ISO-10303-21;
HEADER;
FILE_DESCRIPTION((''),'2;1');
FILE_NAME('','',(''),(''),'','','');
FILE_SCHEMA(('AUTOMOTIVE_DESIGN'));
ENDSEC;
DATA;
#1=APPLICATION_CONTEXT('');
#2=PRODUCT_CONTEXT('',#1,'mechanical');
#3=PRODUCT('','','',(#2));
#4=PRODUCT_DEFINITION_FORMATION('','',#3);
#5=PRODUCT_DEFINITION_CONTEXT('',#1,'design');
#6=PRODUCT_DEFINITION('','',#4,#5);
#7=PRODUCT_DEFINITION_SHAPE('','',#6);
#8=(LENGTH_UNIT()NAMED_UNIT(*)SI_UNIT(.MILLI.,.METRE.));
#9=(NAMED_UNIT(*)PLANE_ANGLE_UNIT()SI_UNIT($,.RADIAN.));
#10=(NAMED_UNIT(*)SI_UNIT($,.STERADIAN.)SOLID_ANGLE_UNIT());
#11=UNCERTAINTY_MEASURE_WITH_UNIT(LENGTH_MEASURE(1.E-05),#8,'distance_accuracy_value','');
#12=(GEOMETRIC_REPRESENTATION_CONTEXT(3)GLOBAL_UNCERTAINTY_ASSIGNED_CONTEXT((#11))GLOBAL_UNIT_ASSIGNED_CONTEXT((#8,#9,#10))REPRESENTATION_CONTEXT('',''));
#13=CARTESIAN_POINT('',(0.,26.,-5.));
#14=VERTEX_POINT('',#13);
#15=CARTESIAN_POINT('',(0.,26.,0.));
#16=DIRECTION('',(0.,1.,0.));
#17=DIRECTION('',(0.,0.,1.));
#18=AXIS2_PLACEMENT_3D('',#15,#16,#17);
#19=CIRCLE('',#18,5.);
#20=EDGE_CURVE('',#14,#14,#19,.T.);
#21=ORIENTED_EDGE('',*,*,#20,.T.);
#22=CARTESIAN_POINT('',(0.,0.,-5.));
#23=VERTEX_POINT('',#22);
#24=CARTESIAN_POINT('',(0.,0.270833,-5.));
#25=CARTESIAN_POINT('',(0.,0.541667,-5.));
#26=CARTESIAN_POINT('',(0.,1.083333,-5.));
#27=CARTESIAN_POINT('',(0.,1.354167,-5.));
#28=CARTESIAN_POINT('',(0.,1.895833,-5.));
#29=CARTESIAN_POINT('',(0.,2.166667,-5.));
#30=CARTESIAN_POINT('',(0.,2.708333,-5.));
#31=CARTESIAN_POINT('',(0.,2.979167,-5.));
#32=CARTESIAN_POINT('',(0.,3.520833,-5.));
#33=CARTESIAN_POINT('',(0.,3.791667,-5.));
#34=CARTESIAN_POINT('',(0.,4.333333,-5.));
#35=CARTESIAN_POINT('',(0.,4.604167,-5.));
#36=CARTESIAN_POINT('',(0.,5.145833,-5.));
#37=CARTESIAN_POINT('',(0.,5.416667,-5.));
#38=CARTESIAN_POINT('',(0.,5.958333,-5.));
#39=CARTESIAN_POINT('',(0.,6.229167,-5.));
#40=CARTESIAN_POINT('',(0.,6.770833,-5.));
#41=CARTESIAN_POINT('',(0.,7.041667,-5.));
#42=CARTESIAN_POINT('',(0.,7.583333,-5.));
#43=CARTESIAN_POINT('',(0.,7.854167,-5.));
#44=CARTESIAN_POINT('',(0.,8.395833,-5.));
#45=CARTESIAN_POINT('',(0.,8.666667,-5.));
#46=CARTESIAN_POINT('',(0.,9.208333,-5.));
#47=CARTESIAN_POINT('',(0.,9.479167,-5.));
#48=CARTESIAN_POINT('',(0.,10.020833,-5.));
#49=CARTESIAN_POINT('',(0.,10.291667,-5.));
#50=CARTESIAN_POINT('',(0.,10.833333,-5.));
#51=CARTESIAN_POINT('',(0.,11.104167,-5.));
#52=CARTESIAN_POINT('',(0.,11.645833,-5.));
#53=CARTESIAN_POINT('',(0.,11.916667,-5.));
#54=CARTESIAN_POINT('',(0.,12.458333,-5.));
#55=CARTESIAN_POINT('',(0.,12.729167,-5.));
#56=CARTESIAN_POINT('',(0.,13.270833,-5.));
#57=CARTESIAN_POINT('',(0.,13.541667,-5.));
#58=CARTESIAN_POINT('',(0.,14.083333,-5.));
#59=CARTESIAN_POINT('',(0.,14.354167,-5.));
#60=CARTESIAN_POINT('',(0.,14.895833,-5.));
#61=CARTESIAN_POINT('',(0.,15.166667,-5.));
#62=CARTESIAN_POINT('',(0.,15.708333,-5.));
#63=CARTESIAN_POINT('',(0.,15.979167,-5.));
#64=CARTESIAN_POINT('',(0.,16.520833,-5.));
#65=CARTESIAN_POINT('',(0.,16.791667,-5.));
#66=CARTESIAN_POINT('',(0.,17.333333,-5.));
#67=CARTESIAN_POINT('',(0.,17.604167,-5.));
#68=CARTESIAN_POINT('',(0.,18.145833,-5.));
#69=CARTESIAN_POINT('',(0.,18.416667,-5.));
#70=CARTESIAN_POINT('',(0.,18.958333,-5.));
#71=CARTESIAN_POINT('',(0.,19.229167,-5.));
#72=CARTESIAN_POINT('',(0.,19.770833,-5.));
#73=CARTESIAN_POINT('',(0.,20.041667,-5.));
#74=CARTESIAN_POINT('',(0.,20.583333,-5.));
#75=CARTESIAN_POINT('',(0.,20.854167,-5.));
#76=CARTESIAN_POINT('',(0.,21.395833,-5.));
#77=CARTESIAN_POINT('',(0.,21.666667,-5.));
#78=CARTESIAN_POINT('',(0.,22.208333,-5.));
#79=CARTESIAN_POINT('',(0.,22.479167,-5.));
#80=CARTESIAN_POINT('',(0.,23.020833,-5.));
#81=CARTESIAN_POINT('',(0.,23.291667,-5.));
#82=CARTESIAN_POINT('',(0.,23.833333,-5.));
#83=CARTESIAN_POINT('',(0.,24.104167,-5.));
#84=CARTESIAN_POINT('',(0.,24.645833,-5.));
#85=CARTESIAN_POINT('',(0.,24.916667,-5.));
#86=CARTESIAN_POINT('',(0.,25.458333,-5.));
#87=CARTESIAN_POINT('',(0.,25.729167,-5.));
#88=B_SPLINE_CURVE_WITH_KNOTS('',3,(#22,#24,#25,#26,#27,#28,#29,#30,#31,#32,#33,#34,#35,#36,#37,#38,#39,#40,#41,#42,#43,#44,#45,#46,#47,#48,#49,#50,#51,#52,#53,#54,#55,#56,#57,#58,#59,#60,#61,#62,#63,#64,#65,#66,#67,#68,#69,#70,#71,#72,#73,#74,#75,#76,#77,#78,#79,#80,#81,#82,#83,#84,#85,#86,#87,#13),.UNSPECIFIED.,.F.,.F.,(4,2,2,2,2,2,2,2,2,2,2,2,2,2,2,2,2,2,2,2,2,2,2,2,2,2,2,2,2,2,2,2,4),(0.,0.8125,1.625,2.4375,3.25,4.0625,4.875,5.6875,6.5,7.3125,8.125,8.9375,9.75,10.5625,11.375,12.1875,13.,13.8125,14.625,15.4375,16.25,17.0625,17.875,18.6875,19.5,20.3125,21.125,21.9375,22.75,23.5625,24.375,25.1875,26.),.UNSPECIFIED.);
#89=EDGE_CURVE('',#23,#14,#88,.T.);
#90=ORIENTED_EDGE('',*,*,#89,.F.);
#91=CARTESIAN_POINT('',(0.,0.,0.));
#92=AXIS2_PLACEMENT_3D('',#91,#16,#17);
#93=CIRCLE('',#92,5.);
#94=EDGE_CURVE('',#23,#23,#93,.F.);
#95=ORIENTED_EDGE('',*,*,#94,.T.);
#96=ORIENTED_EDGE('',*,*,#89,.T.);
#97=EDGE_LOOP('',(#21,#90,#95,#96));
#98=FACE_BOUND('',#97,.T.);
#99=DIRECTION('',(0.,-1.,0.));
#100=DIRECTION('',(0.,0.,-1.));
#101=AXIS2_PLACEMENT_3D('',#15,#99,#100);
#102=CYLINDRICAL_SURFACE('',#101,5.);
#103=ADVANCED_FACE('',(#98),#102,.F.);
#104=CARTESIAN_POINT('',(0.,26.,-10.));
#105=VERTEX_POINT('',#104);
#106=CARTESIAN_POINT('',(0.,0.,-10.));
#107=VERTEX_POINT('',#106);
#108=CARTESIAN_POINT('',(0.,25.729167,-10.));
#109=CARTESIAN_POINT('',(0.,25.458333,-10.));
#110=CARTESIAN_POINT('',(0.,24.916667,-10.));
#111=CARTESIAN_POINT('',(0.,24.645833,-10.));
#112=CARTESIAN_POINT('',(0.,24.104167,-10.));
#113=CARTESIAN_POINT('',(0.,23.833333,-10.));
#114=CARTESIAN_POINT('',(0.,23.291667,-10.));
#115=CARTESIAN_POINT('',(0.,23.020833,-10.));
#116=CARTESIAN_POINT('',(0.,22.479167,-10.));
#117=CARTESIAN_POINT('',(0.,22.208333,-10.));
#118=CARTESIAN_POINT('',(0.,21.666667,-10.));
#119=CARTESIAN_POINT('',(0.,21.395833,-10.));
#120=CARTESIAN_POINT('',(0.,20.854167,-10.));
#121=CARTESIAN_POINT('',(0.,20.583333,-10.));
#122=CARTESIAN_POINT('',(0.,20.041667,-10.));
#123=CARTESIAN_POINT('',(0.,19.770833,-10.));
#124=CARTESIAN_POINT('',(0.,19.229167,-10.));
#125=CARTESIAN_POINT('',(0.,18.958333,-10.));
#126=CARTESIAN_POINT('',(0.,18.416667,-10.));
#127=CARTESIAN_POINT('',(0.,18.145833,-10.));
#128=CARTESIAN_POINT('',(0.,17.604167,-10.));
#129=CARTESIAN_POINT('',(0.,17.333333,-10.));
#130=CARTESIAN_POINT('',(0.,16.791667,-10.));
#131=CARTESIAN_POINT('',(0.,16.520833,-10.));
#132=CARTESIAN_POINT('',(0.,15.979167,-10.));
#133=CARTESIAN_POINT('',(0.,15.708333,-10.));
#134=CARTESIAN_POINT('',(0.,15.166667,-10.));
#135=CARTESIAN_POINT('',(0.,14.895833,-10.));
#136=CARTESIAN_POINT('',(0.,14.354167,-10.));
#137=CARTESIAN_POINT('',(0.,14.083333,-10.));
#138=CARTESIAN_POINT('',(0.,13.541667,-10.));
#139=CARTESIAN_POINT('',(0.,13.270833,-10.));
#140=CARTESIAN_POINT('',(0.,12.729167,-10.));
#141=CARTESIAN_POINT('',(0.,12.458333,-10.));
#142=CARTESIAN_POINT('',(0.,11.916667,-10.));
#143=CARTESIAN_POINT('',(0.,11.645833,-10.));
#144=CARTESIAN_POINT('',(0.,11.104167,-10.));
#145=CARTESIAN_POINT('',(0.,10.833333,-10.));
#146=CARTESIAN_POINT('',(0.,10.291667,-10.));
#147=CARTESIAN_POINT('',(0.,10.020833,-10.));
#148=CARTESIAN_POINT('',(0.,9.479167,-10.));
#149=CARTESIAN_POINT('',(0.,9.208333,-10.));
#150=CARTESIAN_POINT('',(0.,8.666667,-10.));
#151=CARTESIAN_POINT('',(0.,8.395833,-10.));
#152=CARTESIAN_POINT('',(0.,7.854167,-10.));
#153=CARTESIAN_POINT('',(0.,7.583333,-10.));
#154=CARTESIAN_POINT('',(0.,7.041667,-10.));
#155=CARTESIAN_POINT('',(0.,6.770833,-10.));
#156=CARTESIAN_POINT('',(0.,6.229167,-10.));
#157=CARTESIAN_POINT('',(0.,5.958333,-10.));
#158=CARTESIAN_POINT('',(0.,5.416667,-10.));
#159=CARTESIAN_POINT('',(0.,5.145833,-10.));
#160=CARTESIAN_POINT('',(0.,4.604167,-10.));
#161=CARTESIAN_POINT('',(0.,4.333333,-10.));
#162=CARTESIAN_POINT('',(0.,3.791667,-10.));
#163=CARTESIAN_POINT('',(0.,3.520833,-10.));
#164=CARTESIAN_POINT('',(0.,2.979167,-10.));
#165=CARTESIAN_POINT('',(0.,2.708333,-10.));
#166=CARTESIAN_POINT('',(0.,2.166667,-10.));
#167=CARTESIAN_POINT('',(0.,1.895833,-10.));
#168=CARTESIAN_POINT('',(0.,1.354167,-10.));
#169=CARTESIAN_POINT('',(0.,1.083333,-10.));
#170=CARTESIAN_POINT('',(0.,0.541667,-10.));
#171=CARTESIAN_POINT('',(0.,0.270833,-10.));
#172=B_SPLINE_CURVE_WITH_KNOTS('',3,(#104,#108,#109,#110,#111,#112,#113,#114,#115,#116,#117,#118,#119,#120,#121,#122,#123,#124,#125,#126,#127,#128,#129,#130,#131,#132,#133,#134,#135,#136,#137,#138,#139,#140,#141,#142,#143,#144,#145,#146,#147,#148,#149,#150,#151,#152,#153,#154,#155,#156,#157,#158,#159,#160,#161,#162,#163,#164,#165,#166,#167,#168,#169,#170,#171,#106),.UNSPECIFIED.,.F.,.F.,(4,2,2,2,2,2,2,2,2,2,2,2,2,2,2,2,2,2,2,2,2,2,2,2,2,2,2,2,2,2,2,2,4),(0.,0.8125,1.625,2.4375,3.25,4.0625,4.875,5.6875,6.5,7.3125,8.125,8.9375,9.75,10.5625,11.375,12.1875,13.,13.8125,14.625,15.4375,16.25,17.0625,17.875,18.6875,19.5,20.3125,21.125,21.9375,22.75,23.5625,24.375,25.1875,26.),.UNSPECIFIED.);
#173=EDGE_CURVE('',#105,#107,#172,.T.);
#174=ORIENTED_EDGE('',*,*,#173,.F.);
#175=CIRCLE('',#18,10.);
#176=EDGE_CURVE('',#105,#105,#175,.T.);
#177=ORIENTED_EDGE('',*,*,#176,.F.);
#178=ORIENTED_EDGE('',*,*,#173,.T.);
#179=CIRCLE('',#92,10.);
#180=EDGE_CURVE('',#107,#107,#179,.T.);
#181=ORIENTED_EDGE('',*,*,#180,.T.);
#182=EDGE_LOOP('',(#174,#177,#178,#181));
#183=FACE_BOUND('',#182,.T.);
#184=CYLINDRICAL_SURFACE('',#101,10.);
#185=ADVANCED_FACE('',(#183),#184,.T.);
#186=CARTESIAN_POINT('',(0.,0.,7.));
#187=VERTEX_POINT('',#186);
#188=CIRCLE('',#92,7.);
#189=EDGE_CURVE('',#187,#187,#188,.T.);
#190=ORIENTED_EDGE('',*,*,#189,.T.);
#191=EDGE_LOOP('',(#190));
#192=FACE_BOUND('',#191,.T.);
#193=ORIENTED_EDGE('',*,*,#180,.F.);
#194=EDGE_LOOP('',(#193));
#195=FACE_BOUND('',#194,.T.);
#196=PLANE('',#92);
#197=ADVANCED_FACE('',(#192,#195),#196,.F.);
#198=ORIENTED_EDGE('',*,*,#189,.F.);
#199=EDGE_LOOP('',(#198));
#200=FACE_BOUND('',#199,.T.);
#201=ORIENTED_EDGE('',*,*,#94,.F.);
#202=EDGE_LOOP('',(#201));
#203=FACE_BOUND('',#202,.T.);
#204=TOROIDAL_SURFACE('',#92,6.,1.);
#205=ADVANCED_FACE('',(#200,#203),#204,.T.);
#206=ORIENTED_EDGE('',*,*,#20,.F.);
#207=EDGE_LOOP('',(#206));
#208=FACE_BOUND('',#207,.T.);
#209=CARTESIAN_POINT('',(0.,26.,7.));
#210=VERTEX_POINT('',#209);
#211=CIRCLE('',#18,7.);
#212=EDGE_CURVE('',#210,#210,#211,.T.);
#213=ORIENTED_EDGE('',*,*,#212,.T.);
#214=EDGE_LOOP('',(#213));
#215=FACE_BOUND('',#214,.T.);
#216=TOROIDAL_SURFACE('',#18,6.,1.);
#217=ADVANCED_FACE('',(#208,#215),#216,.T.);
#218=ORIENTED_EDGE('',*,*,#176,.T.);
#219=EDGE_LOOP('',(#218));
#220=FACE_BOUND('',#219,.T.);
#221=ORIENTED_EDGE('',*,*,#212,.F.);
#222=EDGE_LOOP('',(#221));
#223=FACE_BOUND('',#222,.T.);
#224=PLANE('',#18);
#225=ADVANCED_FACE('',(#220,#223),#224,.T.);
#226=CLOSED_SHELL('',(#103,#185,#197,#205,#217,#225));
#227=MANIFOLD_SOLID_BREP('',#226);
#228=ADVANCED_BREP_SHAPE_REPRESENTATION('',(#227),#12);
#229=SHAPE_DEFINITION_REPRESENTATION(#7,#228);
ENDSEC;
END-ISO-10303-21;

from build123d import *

# Parameters (mm, degrees)
PROFILE_SKETCH_R              = 10
PROFILE_SKETCH_R_2            = 5
CYLINDER_EXTRUDE_DEPTH        = 26
LIP_RING_SKETCH_R             = 7
LIP_RING_SKETCH_R_2           = 5
BOTTOM_LIP_RING_EXTRUDE_DEPTH = 1
BOTTOM_RING_FILLET_R          = 1
TOP_START                     = -27
SKETCH2_2_R                   = 7
SKETCH2_2_R_2                 = 5
TOP_LIP_RING_EXTRUDE_DEPTH    = 1
TOP_RING_FILLET_R             = 1


with BuildPart() as part:
    # Profile Sketch → Cylinder Extrude (new body)
    with BuildSketch(Plane(origin=(0, 0, 0), x_dir=(1, 0, 0), z_dir=(0, 1, 0))):
        with Locations(Location((0, 0, 0), (0, 0, 90))):
            Circle(PROFILE_SKETCH_R)
        with Locations(Location((0, 0, 0), (0, 0, 90))):
            Circle(PROFILE_SKETCH_R_2, mode=Mode.SUBTRACT)
    extrude(amount=CYLINDER_EXTRUDE_DEPTH)

    # Lip Ring Sketch → Bottom Lip Ring Extrude (add)
    with BuildSketch(Plane(origin=(0, 26, 0), x_dir=(1, 0, 0), z_dir=(0, 1, 0))):
        with Locations(Location((0, 0, 0), (0, 0, 270))):
            Circle(LIP_RING_SKETCH_R)
        with Locations(Location((0, 0, 0), (0, 0, 90))):
            Circle(LIP_RING_SKETCH_R_2, mode=Mode.SUBTRACT)
    extrude(amount=BOTTOM_LIP_RING_EXTRUDE_DEPTH)

    # Bottom Ring Fillet
    bottom_ring_fillet_edges = [part.edges().sort_by_distance(p)[0] for p in [
        (0, 27, -7),
        (0, 27, 5),
    ]]
    fillet(bottom_ring_fillet_edges, radius=BOTTOM_RING_FILLET_R - 0.0001)  # a hair under: the kernel refuses the full size

    # Sketch2<2> → Top Lip Ring Extrude (add)
    with BuildSketch(Plane(origin=(0, 26, 0), x_dir=(1, 0, 0), z_dir=(0, 1, 0)).offset(TOP_START)):
        with Locations(Location((0, 0, 0), (0, 0, 270))):
            Circle(SKETCH2_2_R)
        with Locations(Location((0, 0, 0), (0, 0, 90))):
            Circle(SKETCH2_2_R_2, mode=Mode.SUBTRACT)
    extrude(amount=TOP_LIP_RING_EXTRUDE_DEPTH)

    # Top Ring Fillet
    top_ring_fillet_edges = [part.edges().sort_by_distance(p)[0] for p in [
        (0, -1, -7),
        (0, -1, 5),
    ]]
    fillet(top_ring_fillet_edges, radius=TOP_RING_FILLET_R - 0.0001)  # a hair under: the kernel refuses the full size


solid = part.part
